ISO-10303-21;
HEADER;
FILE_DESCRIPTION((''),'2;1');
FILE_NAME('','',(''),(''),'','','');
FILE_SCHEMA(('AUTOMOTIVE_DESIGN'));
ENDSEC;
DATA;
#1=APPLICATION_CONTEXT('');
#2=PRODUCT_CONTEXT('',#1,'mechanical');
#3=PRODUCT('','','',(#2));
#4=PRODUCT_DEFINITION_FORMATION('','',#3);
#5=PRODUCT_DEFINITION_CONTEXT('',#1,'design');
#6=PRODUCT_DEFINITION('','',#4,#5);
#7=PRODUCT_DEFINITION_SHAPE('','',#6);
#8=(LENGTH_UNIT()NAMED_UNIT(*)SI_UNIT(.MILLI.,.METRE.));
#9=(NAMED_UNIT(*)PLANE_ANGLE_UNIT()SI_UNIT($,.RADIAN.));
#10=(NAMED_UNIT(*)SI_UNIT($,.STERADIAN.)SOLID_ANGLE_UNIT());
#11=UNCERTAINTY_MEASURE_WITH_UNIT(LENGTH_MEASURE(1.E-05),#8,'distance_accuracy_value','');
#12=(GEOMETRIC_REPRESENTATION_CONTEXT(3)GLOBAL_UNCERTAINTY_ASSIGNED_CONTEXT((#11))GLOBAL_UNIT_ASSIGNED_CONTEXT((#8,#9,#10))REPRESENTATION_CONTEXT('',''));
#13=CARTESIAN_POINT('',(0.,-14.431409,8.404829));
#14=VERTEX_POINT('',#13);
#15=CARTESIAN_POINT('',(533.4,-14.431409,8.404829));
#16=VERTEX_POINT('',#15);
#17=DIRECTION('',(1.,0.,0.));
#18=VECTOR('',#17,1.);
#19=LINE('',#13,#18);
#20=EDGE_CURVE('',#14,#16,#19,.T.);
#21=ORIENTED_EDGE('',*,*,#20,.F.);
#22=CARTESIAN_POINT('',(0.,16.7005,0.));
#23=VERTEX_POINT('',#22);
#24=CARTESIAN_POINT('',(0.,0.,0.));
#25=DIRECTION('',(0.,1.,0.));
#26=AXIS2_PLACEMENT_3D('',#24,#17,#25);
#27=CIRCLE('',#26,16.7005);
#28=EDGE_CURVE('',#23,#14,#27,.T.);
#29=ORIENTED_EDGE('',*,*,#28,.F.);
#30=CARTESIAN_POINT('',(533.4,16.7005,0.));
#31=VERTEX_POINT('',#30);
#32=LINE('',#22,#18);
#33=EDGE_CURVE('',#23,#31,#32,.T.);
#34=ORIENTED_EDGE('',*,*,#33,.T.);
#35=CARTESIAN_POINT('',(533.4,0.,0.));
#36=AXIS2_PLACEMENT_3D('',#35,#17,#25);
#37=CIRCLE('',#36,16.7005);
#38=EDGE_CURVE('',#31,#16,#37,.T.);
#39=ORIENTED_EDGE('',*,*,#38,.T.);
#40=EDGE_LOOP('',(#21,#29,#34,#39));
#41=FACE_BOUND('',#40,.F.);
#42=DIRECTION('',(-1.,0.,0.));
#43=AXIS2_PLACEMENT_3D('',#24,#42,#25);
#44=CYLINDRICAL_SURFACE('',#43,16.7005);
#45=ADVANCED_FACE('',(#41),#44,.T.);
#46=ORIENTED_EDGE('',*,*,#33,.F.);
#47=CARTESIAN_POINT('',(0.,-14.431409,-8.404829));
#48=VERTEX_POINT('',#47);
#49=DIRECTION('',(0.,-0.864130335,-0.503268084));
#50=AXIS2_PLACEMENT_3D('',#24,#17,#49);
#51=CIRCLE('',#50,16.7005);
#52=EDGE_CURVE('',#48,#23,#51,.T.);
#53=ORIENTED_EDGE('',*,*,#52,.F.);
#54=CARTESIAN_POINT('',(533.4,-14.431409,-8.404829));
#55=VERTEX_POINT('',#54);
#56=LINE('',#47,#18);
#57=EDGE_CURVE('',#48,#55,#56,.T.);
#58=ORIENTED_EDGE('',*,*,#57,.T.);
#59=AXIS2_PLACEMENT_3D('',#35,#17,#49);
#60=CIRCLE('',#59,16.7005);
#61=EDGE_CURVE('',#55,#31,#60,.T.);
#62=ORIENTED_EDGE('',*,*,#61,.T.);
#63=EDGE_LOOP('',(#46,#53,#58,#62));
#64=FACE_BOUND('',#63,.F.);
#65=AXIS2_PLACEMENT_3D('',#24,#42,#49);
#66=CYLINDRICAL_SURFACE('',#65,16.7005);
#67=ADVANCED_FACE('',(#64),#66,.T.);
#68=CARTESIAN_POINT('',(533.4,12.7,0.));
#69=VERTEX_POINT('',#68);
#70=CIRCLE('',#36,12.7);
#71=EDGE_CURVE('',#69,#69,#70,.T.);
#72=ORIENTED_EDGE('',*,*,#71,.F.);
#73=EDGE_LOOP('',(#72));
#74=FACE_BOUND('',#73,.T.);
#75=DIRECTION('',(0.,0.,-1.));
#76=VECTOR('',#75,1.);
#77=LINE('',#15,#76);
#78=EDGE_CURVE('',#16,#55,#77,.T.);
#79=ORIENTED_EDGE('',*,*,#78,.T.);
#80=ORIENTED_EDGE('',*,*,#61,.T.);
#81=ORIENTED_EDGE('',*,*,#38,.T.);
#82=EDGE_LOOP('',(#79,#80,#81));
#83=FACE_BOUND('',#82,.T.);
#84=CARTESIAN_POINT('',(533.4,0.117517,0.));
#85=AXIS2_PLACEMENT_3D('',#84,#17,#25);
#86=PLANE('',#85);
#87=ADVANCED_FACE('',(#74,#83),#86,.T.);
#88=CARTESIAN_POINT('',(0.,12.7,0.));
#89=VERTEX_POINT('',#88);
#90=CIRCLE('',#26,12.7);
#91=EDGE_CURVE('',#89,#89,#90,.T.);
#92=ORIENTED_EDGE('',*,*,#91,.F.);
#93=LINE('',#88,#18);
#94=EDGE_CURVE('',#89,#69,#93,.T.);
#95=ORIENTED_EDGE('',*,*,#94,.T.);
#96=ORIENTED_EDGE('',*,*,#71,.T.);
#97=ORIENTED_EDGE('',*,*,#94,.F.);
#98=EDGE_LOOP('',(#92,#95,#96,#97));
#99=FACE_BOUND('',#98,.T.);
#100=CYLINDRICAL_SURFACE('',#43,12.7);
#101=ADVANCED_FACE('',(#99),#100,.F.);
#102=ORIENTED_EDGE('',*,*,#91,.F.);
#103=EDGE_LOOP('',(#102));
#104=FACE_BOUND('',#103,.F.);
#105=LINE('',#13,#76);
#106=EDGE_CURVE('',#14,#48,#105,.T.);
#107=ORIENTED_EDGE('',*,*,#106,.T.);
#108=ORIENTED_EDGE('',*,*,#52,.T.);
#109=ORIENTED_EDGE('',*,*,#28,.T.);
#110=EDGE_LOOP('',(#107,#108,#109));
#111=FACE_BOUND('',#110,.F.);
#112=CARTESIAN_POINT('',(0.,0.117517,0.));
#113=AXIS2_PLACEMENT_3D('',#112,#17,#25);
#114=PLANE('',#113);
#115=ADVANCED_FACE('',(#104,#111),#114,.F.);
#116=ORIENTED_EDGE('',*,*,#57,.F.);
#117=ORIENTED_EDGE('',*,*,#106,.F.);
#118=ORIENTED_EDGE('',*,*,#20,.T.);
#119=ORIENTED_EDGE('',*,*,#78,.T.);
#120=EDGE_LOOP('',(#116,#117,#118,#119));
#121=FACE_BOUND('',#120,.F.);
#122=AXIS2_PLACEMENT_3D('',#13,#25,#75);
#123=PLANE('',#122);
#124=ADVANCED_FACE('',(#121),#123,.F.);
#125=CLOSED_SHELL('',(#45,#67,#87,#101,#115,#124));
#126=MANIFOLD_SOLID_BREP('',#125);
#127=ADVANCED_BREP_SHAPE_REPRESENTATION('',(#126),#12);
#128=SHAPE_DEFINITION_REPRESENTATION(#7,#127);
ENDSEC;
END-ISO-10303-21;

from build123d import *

# Parameters (mm, degrees)
F0_R     = 12.7
F1_DEPTH = 533.4


# Not quite as in the source:
# - a feature names something its author has since deleted; it is built from what else it names


with BuildPart() as f1:
    # F0 (on Right) → F1 (new body)
    with BuildSketch(Plane.YZ):
        with BuildLine():
            ThreePointArc((-14.431408661, -8.4048286305), (4.352870312, -16.1232509221), (16.7005, 0))
            ThreePointArc((16.7005, 0), (4.352870312, 16.1232509221), (-14.431408661, 8.4048286305))
            Line((-14.431408661, 8.4048286305), (-14.431408661, -8.4048286305))
        make_face()
        Circle(F0_R, mode=Mode.SUBTRACT)
    extrude(amount=F1_DEPTH)


solid = f1.part
